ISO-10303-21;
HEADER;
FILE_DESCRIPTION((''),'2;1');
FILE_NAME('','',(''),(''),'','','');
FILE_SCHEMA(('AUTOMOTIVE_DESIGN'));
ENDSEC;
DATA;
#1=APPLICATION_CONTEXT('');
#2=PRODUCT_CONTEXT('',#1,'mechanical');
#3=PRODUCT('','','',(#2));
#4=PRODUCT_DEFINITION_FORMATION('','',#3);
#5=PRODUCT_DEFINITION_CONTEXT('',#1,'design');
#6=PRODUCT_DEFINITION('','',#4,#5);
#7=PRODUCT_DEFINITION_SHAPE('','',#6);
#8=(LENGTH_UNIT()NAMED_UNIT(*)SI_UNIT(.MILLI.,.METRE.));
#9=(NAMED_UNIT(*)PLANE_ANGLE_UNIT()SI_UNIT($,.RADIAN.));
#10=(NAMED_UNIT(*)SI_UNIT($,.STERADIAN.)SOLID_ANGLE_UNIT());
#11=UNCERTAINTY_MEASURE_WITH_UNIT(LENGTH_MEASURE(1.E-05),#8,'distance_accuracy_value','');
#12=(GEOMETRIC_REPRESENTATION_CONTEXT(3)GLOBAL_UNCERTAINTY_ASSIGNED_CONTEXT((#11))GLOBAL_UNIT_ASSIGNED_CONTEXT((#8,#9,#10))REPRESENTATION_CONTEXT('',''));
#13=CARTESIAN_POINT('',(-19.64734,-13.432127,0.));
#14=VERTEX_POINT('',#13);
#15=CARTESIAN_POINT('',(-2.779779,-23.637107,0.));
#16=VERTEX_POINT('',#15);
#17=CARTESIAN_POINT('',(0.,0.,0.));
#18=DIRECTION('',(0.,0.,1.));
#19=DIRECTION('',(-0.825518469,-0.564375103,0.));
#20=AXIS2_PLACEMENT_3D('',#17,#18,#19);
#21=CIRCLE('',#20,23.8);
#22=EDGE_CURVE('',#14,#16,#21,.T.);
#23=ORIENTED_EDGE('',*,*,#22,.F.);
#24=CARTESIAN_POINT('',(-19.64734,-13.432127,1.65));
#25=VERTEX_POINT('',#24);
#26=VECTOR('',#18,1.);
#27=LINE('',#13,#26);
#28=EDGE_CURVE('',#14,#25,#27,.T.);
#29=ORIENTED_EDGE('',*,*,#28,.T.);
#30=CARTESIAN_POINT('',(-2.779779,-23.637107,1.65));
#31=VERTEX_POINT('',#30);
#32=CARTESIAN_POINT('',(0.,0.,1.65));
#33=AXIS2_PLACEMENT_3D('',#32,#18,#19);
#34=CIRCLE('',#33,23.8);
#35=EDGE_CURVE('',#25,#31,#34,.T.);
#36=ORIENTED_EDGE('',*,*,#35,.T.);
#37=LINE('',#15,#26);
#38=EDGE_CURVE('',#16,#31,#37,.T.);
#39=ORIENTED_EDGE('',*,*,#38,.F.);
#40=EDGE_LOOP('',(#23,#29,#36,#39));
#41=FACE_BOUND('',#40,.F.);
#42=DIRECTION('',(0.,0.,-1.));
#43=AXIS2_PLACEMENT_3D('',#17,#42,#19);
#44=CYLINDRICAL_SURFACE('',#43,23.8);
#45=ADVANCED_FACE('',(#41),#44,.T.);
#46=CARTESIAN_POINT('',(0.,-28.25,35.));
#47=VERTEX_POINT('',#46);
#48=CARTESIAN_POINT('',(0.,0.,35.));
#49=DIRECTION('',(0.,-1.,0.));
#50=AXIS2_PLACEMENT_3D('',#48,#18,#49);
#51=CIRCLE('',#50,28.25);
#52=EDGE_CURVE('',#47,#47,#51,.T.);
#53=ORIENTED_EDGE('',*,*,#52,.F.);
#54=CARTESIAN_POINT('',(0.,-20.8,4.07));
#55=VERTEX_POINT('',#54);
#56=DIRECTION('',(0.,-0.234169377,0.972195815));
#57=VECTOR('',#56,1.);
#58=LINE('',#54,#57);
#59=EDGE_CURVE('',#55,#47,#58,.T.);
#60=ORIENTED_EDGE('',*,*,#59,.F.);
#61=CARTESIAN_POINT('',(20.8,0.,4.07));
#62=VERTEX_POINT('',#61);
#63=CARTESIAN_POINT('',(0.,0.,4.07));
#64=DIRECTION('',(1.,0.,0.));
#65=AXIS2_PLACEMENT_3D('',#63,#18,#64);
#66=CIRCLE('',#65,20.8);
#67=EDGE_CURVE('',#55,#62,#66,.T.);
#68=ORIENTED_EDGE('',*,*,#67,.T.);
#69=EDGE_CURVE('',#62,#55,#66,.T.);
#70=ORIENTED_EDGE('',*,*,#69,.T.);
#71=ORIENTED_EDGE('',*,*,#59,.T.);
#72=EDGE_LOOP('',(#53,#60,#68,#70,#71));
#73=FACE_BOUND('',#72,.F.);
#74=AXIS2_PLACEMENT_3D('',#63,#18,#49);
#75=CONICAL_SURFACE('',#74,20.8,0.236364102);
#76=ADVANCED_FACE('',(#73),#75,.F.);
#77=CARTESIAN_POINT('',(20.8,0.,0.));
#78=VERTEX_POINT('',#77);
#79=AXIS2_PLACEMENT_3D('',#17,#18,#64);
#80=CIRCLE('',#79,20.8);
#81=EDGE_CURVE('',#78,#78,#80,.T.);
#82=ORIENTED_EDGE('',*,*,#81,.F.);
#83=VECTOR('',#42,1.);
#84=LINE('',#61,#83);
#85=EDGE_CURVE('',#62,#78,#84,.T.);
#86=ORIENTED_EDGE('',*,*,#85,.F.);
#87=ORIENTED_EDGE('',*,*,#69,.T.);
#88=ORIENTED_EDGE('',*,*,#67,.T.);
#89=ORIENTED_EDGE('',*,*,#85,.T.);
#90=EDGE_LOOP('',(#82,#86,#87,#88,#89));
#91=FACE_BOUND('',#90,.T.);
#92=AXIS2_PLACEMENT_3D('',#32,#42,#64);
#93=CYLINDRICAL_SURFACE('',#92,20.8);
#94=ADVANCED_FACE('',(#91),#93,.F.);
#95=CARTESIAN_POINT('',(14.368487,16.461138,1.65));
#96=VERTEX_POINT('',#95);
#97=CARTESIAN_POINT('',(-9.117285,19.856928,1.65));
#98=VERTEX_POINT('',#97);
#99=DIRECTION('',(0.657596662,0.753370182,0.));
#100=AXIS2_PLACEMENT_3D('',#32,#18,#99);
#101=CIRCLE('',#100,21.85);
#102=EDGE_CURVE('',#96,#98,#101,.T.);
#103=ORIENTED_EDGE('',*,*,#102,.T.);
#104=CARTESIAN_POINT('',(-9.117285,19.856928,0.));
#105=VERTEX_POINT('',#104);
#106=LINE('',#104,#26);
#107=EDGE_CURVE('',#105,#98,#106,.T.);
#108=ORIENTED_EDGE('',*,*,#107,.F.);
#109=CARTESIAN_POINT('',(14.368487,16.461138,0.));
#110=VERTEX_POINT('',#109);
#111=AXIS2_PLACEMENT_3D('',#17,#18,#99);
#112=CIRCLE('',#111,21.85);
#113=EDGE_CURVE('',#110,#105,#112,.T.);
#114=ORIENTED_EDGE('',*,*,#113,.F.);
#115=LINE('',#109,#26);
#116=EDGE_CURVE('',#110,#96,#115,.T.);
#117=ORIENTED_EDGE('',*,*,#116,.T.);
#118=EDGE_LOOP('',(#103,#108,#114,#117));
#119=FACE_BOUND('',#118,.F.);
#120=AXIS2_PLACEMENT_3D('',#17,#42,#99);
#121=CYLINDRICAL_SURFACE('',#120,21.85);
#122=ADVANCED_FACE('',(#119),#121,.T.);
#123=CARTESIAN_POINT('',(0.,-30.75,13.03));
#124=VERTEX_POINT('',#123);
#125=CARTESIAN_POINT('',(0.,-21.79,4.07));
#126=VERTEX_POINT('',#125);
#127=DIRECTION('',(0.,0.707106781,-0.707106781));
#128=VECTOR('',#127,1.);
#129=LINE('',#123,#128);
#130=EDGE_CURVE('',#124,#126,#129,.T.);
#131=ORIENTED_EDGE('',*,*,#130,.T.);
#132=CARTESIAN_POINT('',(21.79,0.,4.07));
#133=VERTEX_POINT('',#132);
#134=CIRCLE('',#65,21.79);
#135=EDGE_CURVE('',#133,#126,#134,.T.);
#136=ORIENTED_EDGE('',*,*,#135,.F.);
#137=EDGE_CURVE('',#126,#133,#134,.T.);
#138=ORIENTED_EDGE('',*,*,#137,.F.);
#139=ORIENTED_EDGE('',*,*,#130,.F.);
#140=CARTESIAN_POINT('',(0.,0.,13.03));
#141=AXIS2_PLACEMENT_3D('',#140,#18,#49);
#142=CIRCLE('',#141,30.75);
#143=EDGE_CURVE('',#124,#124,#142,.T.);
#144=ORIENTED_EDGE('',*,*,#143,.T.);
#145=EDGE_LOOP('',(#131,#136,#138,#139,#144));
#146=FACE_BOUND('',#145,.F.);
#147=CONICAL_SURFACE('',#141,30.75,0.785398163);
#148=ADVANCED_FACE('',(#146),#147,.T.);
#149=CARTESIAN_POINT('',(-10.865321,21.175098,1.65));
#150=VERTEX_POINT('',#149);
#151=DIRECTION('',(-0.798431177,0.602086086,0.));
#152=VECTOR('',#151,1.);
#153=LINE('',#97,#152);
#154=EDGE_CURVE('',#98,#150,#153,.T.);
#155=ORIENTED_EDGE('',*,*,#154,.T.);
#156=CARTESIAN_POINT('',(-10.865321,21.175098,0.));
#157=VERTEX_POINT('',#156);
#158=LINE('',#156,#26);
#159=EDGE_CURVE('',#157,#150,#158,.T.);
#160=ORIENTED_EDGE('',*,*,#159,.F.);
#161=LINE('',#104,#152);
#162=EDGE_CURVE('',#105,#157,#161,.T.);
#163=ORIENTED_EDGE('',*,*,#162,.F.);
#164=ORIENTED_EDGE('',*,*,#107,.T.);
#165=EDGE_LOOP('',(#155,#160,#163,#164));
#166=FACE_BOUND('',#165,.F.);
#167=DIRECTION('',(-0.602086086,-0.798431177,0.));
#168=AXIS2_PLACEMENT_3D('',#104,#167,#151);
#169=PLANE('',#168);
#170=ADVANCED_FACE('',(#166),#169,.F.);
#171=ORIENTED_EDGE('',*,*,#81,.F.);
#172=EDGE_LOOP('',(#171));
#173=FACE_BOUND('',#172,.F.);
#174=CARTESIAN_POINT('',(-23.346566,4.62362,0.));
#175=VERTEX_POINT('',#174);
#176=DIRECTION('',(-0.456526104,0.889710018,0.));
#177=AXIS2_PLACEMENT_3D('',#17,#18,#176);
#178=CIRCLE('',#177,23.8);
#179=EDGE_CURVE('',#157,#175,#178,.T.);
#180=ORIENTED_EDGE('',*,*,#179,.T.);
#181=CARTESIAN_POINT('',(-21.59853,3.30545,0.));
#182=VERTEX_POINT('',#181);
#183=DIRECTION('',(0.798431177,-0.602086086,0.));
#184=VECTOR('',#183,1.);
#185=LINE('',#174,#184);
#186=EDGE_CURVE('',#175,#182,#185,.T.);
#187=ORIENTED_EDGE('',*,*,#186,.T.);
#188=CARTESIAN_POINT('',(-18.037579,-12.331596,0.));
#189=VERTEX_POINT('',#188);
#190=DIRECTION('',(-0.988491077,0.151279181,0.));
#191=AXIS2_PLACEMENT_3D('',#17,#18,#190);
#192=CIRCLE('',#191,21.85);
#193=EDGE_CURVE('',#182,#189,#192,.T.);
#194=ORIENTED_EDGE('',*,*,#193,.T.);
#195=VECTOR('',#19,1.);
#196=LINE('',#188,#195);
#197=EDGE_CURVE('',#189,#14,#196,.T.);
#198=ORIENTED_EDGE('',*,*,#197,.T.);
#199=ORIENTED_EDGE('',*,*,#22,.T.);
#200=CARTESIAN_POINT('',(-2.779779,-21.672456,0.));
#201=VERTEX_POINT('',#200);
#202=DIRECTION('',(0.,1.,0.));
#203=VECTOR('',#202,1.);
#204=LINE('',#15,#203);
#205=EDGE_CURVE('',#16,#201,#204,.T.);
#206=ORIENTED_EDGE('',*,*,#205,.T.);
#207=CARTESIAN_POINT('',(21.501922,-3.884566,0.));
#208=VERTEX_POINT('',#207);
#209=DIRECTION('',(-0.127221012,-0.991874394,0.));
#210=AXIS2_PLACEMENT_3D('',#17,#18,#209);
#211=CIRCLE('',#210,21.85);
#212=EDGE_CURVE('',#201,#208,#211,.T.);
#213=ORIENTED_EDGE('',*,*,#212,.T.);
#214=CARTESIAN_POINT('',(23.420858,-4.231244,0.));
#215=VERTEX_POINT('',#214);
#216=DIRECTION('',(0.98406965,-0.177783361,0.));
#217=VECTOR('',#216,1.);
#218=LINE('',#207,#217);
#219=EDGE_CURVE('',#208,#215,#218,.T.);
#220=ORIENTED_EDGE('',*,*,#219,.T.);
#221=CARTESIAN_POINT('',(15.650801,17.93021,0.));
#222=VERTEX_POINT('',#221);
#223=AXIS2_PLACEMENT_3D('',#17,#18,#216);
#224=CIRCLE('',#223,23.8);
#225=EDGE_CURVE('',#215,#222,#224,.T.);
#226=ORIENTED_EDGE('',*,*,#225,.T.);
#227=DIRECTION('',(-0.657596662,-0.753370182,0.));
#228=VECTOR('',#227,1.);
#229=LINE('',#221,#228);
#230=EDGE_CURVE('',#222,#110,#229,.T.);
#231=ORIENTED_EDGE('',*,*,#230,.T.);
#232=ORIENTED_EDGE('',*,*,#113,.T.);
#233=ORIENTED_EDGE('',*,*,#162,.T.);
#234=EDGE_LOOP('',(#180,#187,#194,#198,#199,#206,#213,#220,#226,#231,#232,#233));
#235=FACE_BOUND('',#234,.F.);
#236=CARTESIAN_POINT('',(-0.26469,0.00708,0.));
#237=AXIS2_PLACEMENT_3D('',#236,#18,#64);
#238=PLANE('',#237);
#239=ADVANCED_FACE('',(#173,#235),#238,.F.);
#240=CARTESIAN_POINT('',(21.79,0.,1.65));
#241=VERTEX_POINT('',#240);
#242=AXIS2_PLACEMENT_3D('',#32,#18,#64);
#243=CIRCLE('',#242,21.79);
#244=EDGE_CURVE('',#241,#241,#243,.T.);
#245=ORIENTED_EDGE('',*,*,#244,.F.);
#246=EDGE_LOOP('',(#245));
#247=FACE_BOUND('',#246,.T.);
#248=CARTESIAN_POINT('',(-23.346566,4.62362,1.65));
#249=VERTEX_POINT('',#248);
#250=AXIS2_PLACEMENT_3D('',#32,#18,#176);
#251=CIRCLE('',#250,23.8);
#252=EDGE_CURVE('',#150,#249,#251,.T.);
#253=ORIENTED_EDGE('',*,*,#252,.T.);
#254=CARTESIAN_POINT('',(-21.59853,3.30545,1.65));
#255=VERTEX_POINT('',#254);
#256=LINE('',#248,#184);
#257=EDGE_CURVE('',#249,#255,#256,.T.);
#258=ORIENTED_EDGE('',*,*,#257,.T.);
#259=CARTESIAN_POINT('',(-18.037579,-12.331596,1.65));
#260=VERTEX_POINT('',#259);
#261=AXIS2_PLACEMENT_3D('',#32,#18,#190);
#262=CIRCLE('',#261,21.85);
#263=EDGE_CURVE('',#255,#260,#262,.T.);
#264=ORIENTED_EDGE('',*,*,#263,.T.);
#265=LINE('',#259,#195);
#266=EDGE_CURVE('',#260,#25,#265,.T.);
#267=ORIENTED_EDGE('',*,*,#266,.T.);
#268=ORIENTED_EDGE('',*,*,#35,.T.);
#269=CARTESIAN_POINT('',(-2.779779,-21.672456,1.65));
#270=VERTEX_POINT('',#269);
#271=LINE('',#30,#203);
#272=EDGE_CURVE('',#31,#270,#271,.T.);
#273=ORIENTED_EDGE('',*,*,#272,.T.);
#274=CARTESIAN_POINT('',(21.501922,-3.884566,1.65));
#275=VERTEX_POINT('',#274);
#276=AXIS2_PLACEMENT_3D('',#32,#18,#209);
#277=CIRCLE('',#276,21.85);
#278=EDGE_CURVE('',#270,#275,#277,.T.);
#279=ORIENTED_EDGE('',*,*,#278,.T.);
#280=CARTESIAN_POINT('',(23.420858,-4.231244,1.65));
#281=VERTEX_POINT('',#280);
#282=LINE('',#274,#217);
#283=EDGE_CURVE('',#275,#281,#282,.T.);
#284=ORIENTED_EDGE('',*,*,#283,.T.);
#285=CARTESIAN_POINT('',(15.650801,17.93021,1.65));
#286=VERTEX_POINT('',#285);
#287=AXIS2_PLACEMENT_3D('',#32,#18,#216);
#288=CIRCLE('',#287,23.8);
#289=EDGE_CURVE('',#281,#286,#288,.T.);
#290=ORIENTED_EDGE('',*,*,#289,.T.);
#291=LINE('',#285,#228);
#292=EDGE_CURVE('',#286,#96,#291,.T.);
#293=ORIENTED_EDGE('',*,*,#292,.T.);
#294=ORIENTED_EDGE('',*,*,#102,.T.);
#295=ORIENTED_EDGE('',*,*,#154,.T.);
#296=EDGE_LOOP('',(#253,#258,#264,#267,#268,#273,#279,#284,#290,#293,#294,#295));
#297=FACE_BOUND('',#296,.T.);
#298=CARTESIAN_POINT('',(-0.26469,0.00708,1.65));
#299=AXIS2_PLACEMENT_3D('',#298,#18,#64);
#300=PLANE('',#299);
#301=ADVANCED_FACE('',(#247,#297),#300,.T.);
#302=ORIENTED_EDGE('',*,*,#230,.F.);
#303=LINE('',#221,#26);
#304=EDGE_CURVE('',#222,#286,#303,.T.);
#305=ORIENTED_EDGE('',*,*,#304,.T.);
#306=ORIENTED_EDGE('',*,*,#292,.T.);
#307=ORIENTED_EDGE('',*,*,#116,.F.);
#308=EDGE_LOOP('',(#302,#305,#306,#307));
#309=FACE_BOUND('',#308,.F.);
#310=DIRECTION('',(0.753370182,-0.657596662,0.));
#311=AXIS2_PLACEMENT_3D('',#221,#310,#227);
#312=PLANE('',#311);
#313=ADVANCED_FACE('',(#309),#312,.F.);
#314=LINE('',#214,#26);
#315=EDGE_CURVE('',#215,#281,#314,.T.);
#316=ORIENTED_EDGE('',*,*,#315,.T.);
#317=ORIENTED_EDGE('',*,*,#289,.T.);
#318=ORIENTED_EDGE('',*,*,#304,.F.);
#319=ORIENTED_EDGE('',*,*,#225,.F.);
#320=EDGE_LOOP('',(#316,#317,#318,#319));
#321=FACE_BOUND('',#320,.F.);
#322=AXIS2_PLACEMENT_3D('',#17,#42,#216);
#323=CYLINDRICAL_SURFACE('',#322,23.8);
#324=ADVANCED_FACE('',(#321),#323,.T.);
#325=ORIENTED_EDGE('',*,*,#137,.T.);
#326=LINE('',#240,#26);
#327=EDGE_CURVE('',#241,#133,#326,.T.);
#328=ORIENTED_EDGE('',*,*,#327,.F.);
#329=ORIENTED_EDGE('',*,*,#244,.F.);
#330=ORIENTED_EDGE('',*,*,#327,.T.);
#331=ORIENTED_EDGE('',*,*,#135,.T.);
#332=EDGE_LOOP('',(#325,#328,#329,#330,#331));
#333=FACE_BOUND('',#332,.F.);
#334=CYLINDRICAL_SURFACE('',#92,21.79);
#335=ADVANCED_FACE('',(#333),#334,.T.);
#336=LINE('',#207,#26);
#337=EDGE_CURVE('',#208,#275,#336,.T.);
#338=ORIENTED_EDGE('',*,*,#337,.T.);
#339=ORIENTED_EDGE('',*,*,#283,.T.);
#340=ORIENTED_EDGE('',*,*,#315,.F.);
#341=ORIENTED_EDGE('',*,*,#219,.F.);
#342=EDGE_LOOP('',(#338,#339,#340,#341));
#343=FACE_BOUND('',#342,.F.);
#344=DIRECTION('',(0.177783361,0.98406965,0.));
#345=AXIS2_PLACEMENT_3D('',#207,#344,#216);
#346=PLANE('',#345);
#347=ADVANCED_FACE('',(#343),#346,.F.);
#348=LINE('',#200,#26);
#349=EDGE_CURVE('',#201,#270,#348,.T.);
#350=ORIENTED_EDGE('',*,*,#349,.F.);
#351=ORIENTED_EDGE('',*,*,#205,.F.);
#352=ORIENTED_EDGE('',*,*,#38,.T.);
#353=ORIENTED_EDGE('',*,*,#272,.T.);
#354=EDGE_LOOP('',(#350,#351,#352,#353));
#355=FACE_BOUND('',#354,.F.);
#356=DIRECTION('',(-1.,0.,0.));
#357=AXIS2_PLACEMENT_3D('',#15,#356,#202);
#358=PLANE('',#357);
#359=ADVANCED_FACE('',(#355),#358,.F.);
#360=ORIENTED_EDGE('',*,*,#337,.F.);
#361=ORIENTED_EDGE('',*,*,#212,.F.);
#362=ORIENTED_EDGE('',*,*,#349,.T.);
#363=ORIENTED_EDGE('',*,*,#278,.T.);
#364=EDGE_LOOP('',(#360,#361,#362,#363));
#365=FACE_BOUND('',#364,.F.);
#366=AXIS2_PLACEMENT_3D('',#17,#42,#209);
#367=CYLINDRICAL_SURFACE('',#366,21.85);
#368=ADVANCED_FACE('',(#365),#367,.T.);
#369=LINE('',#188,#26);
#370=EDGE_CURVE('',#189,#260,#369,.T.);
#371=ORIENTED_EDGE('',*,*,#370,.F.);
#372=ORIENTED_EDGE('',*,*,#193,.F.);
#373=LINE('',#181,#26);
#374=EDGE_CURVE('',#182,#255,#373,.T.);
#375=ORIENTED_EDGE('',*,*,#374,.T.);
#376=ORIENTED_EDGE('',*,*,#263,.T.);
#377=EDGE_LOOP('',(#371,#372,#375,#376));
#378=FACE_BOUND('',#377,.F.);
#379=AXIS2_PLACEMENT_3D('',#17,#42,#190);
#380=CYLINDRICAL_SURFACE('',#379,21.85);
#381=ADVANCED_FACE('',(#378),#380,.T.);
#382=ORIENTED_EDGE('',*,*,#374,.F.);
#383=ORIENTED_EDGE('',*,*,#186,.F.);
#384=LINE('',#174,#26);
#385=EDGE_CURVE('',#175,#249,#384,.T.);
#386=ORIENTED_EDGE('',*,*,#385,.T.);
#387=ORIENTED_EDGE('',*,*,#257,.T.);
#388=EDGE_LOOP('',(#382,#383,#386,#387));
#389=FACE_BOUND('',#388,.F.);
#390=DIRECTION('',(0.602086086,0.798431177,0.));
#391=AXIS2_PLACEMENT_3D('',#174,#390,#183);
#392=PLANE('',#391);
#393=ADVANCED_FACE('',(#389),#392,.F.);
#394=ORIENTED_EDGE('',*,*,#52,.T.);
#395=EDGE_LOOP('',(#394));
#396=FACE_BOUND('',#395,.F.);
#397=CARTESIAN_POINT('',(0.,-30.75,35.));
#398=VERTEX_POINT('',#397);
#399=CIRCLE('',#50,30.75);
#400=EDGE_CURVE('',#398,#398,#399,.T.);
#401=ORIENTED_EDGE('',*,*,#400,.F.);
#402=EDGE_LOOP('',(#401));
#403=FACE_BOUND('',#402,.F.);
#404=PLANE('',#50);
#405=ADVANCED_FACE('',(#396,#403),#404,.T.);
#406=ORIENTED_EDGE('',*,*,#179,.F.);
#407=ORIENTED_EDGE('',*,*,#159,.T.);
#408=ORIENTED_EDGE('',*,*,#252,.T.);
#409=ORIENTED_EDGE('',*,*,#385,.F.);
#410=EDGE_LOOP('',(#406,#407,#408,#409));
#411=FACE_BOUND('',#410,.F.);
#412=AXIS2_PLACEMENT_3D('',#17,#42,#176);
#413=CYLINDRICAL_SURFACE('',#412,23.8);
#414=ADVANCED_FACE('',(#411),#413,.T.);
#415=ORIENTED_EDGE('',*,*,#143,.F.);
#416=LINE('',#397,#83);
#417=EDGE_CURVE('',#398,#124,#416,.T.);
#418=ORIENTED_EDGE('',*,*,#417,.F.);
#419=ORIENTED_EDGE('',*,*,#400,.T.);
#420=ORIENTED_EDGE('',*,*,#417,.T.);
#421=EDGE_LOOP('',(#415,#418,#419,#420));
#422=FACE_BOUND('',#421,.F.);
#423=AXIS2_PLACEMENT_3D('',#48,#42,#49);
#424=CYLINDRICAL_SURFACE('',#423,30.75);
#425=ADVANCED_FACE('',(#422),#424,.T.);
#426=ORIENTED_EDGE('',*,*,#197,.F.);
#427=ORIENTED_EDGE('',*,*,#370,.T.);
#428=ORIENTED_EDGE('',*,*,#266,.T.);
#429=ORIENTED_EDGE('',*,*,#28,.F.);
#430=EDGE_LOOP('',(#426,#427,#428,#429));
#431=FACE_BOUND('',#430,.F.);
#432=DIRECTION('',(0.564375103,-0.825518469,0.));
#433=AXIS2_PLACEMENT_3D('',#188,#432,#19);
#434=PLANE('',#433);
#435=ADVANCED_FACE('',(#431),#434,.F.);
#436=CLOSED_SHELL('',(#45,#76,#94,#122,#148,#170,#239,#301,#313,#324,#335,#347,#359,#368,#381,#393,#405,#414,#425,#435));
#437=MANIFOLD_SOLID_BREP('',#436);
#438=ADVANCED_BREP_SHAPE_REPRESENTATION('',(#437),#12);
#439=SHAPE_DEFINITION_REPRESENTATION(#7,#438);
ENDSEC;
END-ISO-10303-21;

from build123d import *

# Parameters (mm, degrees)
F0_R     = 20.8
F1_DEPTH = 1.65
F2_R     = 21.79
F2_R_2   = 20.8
F3_DEPTH = 2.42


# Not quite as in the source:
# - a feature names something its author has since deleted; it is built from what else it names


with BuildPart() as f1:
    # F0 (on Top) → F1 (new body)
    with BuildSketch(Plane.XY):
        with BuildLine():
            Line((-23.3465658477, 4.6236201314), (-21.5985300328, 3.3054501087))
            ThreePointArc((-21.5985300328, 3.3054501087), (-21.3045670847, -4.8515895677), (-18.0375785467, -12.3315960108))
            Line((-18.0375785467, -12.3315960108), (-19.6473395611, -13.4321274626))
            ThreePointArc((-19.6473395611, -13.4321274626), (-12.3198747915, -20.3632189283), (-2.7797791084, -23.6371070165))
            Line((-2.7797791084, -23.6371070165), (-2.7797791084, -21.6724555164))
            ThreePointArc((-2.7797791084, -21.6724555164), (12.9124709806, -17.6264174799), (21.5019218593, -3.884566431))
            Line((21.5019218593, -3.884566431), (23.4208576774, -4.2312439843))
            ThreePointArc((23.4208576774, -4.2312439843), (22.4595443709, 7.8745708867), (15.6508005462, 17.930210324))
            Line((15.6508005462, 17.930210324), (14.368487056, 16.4611384698))
            ThreePointArc((14.368487056, 16.4611384698), (3.1267598049, 21.6251213435), (-9.1172854603, 19.8569284089))
            Line((-9.1172854603, 19.8569284089), (-10.8653212752, 21.1750984316))
            ThreePointArc((-10.8653212752, 21.1750984316), (-19.0026620137, 14.329648858), (-23.3465658477, 4.6236201314))
        make_face()
        Circle(F0_R, mode=Mode.SUBTRACT)
    extrude(amount=F1_DEPTH)

    # F2 (on face) → F3 (join)
    with BuildSketch(Plane.XY.offset(1.65)):
        Circle(F2_R)
        Circle(F2_R_2, mode=Mode.SUBTRACT)
    extrude(amount=F3_DEPTH)

    # F4 (on Right) → F5 (revolve)
    with BuildSketch(Plane.YZ):
        Polygon((-21.79, 4.07), (-20.8, 4.07), (-28.25, 35), (-30.75, 35), (-30.75, 13.03), align=None)
    revolve(axis=Axis((0, 0, 17.5), (0, 0, 1)))


solid = f1.part
